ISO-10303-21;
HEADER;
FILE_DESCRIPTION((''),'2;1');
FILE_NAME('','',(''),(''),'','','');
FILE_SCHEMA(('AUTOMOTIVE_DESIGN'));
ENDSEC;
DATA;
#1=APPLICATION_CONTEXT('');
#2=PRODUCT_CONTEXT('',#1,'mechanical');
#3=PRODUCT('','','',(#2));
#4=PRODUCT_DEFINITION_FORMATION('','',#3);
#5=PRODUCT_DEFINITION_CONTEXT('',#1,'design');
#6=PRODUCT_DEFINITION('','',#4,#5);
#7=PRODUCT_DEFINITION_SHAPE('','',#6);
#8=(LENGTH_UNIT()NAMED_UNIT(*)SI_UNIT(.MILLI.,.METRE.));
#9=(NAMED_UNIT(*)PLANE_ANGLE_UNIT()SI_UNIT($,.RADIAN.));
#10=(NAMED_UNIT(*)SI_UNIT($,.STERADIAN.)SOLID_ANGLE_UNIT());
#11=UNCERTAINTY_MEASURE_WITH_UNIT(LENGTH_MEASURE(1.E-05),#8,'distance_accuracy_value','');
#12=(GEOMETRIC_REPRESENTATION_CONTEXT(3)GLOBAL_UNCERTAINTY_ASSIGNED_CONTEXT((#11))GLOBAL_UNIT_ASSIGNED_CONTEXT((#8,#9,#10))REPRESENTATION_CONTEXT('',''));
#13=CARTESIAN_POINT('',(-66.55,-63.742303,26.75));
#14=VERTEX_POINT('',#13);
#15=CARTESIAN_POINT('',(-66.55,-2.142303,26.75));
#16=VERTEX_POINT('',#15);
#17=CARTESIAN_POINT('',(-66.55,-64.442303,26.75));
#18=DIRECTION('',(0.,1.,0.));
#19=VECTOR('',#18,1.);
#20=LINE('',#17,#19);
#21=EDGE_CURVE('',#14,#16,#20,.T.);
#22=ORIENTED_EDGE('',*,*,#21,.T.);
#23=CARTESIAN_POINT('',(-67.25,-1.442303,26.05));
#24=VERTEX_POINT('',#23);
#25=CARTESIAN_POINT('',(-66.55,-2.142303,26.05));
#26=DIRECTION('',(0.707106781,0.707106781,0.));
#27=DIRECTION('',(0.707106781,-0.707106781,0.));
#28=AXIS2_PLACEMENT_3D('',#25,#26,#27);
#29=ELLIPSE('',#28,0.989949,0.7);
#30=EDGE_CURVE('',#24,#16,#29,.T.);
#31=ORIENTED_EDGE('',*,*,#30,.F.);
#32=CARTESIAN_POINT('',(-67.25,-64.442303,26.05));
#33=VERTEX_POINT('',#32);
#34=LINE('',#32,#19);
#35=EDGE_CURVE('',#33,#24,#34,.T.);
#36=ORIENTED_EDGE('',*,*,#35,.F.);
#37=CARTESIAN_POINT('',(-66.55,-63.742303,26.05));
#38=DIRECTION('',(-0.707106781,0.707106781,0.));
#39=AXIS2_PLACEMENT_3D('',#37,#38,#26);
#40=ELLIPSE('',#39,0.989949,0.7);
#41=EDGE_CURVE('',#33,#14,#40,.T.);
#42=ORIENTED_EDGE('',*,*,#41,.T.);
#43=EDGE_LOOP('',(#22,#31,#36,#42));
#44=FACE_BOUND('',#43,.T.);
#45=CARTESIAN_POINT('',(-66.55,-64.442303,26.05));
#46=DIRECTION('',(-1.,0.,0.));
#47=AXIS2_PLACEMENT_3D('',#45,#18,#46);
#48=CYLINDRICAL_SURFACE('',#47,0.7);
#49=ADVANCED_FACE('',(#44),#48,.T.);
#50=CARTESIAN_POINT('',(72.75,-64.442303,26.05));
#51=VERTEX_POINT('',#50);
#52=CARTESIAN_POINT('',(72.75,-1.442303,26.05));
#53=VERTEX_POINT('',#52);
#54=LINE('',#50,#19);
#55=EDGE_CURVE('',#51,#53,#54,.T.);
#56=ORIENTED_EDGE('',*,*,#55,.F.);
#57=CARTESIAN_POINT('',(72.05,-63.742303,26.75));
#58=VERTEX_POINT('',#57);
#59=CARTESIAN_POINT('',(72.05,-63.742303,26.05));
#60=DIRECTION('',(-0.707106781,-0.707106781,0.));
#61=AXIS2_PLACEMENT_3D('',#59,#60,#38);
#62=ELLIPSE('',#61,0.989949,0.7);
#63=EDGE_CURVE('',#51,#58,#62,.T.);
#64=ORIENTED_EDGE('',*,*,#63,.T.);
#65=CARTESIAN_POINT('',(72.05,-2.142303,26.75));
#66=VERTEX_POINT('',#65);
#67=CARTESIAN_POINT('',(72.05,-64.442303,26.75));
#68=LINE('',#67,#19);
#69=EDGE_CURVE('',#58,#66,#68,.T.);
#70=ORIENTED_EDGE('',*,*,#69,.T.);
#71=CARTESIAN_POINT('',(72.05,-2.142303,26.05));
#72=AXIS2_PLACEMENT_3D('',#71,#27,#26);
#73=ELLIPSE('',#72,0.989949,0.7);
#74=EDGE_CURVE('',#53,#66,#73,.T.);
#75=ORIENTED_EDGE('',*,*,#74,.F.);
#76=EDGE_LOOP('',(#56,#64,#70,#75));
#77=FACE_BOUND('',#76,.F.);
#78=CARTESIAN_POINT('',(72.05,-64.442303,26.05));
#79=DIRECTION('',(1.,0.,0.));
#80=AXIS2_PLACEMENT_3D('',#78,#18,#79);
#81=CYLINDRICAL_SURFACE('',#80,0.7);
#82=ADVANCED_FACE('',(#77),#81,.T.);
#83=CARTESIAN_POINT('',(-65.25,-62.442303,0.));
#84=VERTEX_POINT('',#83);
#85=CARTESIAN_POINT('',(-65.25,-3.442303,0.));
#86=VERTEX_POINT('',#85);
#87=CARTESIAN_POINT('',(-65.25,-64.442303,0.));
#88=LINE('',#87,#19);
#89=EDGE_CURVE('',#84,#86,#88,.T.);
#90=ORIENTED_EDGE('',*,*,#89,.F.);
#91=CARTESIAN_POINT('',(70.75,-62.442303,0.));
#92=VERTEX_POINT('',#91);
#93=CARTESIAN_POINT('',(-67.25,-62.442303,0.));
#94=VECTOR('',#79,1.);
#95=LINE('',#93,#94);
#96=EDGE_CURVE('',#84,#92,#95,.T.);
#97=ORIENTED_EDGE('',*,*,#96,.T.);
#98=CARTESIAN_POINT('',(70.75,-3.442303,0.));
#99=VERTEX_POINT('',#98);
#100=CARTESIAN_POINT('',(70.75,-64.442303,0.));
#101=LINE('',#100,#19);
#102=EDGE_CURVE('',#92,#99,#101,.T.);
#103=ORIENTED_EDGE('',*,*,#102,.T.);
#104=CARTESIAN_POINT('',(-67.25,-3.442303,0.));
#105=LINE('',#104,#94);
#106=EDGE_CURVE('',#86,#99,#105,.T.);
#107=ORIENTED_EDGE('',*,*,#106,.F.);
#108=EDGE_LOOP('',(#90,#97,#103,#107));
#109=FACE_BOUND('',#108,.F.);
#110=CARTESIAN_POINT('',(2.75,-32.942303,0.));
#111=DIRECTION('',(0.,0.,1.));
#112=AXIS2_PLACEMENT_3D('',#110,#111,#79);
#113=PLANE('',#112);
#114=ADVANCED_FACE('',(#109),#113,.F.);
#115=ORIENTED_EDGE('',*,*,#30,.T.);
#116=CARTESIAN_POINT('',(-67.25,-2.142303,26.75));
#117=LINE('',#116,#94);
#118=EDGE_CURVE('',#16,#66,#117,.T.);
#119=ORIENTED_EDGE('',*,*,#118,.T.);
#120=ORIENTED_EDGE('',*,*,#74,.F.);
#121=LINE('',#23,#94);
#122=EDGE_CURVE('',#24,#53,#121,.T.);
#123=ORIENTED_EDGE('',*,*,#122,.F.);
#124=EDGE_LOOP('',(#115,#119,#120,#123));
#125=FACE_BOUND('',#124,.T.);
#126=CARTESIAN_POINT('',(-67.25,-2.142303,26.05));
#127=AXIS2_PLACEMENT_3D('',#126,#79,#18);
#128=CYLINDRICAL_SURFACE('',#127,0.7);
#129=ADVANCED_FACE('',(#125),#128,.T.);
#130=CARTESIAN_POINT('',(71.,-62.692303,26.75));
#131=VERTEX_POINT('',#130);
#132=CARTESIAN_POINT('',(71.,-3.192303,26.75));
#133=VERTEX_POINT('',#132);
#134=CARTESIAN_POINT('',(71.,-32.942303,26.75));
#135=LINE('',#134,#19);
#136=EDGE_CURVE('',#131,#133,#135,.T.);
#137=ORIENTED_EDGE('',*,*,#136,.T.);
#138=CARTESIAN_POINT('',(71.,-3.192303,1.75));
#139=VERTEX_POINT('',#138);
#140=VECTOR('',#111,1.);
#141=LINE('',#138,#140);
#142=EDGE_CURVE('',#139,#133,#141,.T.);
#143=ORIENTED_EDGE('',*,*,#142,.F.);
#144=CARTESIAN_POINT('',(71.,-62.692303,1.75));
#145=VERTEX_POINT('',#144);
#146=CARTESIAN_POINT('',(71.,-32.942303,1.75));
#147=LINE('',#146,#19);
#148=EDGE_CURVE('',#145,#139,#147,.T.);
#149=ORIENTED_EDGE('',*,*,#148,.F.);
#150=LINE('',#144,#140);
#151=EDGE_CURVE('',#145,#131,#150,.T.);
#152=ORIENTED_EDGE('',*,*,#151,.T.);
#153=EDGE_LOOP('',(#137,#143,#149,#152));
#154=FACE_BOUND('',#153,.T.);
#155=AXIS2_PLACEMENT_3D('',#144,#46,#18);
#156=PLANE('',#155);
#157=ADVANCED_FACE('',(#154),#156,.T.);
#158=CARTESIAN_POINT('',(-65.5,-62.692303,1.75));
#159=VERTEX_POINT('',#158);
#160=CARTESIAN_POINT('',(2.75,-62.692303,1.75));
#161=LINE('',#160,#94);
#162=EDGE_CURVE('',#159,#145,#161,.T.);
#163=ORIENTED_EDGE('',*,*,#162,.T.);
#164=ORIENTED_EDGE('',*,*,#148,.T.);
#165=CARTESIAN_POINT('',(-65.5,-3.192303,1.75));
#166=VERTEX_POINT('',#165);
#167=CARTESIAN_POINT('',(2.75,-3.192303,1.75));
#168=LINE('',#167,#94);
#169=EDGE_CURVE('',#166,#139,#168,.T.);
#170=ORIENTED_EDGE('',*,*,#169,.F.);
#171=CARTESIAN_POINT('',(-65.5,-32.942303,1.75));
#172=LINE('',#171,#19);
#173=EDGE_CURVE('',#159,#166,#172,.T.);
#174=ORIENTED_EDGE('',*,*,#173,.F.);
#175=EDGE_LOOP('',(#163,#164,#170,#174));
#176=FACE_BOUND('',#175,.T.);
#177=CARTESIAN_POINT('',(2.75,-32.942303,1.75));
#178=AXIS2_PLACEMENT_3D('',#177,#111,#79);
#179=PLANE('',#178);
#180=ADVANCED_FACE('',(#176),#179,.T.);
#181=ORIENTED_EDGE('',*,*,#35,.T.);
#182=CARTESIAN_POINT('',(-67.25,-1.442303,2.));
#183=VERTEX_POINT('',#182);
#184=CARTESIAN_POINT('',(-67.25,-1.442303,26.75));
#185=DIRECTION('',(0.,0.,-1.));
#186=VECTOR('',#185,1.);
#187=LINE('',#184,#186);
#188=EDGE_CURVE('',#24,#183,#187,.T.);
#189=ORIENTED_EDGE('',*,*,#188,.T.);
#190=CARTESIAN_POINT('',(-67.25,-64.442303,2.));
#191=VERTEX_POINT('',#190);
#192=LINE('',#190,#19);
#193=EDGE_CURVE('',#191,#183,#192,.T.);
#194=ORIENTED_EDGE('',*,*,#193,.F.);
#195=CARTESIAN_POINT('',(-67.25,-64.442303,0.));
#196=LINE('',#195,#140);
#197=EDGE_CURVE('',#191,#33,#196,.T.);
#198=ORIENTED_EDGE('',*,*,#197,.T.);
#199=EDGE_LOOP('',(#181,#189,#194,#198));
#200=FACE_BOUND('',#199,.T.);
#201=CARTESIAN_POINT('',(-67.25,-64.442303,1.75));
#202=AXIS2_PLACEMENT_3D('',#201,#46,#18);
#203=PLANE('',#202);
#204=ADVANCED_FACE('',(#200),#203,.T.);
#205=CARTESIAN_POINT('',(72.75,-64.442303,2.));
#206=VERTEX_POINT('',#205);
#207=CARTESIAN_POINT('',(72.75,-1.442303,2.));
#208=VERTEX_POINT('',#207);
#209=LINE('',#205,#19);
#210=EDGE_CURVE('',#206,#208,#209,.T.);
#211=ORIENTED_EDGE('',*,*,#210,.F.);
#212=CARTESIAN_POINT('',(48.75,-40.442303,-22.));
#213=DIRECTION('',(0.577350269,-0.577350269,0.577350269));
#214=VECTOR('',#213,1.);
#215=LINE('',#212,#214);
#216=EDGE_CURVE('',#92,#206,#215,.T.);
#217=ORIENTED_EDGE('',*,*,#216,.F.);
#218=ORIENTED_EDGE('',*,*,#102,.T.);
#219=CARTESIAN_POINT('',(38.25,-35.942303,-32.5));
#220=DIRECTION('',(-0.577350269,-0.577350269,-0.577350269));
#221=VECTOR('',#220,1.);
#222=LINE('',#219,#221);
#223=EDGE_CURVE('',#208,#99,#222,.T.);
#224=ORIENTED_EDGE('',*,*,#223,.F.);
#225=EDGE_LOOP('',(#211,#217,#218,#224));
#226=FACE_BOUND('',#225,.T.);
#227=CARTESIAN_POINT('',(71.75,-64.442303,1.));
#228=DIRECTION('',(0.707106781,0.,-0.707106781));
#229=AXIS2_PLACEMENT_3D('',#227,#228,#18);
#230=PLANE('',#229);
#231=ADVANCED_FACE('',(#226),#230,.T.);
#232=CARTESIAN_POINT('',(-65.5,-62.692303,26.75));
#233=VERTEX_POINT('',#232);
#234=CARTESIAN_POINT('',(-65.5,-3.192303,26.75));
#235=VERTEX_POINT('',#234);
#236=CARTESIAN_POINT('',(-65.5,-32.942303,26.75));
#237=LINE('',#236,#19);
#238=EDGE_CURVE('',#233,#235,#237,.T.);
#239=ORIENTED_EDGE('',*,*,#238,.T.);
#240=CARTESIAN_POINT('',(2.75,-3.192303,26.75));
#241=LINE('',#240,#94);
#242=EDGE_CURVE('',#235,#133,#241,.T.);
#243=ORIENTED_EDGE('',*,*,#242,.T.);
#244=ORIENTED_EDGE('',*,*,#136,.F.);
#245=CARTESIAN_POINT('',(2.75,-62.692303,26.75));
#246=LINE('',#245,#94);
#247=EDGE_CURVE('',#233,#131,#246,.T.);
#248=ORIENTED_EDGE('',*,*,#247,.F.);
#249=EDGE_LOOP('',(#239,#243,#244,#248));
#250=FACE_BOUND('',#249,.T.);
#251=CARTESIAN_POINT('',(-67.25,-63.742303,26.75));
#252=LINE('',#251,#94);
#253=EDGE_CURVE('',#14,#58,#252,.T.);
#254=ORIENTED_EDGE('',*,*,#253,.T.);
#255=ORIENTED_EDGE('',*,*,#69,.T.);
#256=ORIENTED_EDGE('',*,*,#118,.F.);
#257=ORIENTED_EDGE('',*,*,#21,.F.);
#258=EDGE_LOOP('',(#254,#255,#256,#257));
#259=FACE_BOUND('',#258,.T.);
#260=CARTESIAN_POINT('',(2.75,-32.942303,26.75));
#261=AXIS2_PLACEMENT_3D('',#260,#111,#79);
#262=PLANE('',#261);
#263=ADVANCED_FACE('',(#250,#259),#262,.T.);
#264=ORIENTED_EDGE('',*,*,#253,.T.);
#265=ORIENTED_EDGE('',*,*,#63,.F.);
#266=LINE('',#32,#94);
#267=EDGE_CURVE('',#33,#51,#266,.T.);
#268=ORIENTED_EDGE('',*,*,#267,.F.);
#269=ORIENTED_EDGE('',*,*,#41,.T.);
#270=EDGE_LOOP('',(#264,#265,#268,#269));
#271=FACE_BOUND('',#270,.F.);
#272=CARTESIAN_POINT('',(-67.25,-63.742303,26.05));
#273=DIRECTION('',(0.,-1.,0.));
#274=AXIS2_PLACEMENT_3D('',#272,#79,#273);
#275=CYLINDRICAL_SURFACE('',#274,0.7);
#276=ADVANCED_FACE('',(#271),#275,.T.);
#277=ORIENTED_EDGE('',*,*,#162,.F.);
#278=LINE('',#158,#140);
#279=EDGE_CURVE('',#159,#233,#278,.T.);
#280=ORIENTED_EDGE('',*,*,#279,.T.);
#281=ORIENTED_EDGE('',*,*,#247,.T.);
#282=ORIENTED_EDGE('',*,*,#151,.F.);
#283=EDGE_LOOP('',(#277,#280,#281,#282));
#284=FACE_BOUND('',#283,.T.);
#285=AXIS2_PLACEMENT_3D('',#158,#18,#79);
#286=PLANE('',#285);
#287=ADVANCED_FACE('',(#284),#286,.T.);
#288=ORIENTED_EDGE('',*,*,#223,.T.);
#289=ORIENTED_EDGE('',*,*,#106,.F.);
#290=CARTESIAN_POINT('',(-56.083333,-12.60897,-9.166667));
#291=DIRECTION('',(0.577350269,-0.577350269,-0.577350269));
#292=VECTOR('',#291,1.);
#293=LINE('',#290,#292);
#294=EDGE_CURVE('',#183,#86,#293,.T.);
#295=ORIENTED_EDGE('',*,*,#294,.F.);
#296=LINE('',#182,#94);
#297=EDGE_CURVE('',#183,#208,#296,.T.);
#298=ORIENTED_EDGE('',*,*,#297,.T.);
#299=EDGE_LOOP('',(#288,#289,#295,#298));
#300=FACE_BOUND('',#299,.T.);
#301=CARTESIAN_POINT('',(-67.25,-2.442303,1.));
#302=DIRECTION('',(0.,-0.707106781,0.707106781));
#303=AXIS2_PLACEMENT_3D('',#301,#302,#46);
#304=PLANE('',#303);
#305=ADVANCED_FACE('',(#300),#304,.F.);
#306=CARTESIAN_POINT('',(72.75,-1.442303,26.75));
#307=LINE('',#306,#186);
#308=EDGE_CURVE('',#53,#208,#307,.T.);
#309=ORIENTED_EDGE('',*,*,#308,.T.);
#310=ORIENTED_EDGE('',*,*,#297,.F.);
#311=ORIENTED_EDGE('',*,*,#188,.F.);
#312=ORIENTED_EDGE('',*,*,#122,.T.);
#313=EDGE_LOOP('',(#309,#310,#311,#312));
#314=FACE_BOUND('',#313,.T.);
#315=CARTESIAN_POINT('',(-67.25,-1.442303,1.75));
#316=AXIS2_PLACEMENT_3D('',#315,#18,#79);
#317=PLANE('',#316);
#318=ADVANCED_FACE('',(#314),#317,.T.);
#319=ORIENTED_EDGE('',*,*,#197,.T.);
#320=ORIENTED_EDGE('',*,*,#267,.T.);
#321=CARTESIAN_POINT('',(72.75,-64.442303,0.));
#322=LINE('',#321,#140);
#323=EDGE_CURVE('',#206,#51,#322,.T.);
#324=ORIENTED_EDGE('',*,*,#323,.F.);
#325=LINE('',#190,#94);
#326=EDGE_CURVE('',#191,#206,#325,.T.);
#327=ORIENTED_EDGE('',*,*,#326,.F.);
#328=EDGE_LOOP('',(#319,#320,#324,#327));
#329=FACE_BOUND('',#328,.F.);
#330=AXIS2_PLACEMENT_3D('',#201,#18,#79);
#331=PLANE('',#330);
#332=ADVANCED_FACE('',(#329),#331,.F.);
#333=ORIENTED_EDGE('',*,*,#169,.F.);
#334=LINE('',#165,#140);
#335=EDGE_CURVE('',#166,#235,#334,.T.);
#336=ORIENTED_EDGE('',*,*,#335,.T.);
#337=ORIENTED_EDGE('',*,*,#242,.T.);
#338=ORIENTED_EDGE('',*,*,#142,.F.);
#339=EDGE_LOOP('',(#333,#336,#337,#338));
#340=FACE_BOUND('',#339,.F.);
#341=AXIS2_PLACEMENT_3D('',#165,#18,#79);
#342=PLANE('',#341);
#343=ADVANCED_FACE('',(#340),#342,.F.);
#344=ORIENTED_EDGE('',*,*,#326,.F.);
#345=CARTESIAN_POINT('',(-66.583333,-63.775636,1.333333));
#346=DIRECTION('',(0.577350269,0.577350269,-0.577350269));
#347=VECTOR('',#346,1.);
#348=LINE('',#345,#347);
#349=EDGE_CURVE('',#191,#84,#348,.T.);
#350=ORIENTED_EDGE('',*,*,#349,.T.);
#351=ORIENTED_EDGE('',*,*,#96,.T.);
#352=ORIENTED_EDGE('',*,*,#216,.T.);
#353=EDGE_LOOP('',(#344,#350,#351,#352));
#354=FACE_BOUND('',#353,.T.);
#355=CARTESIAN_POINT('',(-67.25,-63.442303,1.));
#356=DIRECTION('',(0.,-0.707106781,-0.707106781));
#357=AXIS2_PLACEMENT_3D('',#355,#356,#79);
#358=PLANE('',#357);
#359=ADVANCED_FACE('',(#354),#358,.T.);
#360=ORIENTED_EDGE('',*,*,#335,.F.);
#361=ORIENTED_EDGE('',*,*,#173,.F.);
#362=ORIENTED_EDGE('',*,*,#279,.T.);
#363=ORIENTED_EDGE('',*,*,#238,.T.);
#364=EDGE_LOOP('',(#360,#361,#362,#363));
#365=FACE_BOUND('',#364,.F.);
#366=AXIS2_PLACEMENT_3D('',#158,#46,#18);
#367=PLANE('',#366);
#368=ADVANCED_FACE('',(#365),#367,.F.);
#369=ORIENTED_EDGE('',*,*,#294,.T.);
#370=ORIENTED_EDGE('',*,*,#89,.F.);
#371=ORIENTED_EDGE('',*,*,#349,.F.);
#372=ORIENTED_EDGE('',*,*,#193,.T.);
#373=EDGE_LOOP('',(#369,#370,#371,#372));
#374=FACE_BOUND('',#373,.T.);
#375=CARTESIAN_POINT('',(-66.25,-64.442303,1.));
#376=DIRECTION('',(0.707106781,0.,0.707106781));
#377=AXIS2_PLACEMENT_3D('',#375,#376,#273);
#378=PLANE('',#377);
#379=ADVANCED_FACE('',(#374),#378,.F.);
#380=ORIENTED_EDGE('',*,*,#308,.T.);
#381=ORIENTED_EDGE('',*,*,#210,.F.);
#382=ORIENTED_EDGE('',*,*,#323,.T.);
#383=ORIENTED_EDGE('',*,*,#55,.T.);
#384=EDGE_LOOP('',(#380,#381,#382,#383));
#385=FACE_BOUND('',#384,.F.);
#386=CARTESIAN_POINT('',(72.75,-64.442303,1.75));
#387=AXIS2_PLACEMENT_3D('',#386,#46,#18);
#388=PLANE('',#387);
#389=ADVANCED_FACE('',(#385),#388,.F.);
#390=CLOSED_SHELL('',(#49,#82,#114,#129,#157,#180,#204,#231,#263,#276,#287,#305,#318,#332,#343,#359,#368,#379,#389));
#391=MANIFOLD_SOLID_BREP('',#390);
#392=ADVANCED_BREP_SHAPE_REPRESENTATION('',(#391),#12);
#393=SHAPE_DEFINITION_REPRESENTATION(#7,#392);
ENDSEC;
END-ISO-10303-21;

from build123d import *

# Parameters (mm, degrees)
F0_W     = 140
F0_H     = 63
F1_DEPTH = 1.75
F2_W     = 140
F2_H     = 63
F2_W_2   = 136.5
F2_H_2   = 59.5
F3_DEPTH = 25
F4_R     = 0.7
F5_SIZE  = 2


with BuildPart() as f1:
    # F0 (on Top) → F1 (new body)
    with BuildSketch(Plane.XY):
        with Locations((2.7499999851, -32.9423031422)):
            Rectangle(F0_W, F0_H)
    extrude(amount=F1_DEPTH)

    # F2 (on face) → F3 (join)
    with BuildSketch(Plane.XY.offset(1.75)):
        with Locations((2.7499999851, -32.9423031422)):
            Rectangle(F2_W, F2_H)
        with Locations((2.7499999851, -32.9423031422)):
            Rectangle(F2_W_2, F2_H_2, mode=Mode.SUBTRACT)
    extrude(amount=F3_DEPTH)

    # F4
    f4_edges = [f1.edges().sort_by_distance(p)[0] for p in [
        (2.75, -1.442303, 26.75),
        (72.75, -32.942303, 26.75),
        (2.75, -64.442303, 26.75),
        (-67.25, -32.942303, 26.75),
    ]]
    fillet(f4_edges, radius=F4_R)

    # F5
    f5_edges = [f1.edges().sort_by_distance(p)[0] for p in [
        (2.75, -1.442303, 0),
        (-67.25, -32.942303, 0),
        (2.75, -64.442303, 0),
        (72.75, -32.942303, 0),
    ]]
    chamfer(f5_edges, length=F5_SIZE)


solid = f1.part
